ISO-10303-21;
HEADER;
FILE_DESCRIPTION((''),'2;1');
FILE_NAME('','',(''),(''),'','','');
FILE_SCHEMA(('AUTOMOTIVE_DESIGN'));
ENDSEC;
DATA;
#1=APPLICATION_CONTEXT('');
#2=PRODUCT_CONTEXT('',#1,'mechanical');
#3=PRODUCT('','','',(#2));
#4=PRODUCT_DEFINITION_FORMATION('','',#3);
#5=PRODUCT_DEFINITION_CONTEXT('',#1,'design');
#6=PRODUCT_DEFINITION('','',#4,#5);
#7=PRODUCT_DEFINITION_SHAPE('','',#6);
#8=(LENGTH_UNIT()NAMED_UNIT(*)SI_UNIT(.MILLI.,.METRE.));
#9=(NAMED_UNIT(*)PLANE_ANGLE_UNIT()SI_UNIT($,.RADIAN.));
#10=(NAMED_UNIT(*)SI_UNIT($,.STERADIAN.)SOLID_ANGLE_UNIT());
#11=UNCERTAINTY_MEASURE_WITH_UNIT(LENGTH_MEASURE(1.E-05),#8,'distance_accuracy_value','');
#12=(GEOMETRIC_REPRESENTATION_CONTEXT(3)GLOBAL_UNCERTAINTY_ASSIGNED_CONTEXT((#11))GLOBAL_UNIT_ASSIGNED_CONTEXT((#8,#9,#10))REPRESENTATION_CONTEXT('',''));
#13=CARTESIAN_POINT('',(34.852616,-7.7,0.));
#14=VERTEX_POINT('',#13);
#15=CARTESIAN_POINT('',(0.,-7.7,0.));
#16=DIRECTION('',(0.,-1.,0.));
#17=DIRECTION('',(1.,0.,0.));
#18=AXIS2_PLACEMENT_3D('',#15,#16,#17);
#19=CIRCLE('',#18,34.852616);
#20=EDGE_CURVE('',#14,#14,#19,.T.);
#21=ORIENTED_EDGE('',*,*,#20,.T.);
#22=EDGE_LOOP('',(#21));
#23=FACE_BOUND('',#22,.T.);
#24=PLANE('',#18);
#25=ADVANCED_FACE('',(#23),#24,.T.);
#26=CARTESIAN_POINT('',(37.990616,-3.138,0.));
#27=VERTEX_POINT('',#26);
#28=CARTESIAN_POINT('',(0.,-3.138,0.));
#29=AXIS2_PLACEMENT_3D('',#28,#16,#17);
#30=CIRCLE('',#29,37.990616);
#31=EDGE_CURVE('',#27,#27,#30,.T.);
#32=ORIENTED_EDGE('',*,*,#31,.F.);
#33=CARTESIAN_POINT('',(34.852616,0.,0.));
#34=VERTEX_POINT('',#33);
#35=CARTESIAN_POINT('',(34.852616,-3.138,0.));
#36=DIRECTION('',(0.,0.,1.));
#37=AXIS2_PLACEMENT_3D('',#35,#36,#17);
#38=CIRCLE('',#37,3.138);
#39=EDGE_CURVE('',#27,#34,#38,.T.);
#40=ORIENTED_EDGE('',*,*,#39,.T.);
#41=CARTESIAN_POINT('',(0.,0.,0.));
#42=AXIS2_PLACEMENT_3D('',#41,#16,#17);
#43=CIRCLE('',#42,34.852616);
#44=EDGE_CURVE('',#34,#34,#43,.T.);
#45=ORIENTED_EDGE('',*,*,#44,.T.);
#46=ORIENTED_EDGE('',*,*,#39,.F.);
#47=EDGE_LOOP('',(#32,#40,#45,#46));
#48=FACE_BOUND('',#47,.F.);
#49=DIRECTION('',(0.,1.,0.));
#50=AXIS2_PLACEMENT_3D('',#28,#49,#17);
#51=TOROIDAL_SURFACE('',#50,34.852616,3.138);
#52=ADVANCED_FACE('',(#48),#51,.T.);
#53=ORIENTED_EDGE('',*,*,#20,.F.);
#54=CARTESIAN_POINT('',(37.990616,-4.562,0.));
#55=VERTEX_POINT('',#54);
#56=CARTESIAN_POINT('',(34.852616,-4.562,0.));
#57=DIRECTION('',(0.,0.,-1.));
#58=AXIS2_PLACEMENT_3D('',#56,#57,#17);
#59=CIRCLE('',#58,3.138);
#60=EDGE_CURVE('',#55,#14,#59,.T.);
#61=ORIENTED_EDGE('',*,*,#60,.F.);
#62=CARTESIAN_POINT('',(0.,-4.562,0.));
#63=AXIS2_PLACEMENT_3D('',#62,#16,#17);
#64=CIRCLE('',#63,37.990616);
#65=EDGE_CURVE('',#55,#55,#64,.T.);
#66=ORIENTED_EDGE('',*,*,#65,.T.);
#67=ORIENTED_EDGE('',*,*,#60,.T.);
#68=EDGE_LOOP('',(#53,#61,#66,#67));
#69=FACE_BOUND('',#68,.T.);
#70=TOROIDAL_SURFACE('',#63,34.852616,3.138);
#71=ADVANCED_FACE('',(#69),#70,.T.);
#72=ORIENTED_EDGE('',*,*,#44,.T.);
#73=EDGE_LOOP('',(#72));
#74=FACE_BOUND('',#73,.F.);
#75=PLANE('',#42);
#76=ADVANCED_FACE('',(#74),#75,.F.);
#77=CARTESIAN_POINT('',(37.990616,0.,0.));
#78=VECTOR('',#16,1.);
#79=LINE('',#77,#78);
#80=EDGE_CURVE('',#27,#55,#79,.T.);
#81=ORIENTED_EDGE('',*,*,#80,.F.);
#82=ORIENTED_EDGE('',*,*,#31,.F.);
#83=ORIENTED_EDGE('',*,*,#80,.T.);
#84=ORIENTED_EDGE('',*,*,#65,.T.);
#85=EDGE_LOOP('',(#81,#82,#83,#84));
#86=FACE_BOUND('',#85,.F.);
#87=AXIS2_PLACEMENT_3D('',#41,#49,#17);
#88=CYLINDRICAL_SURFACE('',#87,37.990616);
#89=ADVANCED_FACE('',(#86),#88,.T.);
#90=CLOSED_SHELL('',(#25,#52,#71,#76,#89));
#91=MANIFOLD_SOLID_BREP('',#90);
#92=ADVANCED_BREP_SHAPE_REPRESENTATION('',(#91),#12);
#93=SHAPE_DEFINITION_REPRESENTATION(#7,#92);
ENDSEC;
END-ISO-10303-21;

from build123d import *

# Parameters (mm, degrees)
F0_R     = 37.9906163482
F1_DEPTH = 7.7
F2_R     = 3.138


# Not quite as in the source:
# - the program builds the solid bodies; features that only make, move or delete a surface that nothing else refers to are left out


with BuildPart() as f1:
    # F0 (on Front) → F1 (new body)
    with BuildSketch(Plane.XZ):
        Circle(F0_R)
    extrude(amount=F1_DEPTH)

    # F2
    f2_edges = [f1.edges().sort_by_distance(p)[0] for p in [
        (37.990616, -3.85, 0),
        (-37.990616, 0, 0),
        (-37.990616, -7.7, 0),
    ]]
    fillet(f2_edges, radius=F2_R)


solid = f1.part
